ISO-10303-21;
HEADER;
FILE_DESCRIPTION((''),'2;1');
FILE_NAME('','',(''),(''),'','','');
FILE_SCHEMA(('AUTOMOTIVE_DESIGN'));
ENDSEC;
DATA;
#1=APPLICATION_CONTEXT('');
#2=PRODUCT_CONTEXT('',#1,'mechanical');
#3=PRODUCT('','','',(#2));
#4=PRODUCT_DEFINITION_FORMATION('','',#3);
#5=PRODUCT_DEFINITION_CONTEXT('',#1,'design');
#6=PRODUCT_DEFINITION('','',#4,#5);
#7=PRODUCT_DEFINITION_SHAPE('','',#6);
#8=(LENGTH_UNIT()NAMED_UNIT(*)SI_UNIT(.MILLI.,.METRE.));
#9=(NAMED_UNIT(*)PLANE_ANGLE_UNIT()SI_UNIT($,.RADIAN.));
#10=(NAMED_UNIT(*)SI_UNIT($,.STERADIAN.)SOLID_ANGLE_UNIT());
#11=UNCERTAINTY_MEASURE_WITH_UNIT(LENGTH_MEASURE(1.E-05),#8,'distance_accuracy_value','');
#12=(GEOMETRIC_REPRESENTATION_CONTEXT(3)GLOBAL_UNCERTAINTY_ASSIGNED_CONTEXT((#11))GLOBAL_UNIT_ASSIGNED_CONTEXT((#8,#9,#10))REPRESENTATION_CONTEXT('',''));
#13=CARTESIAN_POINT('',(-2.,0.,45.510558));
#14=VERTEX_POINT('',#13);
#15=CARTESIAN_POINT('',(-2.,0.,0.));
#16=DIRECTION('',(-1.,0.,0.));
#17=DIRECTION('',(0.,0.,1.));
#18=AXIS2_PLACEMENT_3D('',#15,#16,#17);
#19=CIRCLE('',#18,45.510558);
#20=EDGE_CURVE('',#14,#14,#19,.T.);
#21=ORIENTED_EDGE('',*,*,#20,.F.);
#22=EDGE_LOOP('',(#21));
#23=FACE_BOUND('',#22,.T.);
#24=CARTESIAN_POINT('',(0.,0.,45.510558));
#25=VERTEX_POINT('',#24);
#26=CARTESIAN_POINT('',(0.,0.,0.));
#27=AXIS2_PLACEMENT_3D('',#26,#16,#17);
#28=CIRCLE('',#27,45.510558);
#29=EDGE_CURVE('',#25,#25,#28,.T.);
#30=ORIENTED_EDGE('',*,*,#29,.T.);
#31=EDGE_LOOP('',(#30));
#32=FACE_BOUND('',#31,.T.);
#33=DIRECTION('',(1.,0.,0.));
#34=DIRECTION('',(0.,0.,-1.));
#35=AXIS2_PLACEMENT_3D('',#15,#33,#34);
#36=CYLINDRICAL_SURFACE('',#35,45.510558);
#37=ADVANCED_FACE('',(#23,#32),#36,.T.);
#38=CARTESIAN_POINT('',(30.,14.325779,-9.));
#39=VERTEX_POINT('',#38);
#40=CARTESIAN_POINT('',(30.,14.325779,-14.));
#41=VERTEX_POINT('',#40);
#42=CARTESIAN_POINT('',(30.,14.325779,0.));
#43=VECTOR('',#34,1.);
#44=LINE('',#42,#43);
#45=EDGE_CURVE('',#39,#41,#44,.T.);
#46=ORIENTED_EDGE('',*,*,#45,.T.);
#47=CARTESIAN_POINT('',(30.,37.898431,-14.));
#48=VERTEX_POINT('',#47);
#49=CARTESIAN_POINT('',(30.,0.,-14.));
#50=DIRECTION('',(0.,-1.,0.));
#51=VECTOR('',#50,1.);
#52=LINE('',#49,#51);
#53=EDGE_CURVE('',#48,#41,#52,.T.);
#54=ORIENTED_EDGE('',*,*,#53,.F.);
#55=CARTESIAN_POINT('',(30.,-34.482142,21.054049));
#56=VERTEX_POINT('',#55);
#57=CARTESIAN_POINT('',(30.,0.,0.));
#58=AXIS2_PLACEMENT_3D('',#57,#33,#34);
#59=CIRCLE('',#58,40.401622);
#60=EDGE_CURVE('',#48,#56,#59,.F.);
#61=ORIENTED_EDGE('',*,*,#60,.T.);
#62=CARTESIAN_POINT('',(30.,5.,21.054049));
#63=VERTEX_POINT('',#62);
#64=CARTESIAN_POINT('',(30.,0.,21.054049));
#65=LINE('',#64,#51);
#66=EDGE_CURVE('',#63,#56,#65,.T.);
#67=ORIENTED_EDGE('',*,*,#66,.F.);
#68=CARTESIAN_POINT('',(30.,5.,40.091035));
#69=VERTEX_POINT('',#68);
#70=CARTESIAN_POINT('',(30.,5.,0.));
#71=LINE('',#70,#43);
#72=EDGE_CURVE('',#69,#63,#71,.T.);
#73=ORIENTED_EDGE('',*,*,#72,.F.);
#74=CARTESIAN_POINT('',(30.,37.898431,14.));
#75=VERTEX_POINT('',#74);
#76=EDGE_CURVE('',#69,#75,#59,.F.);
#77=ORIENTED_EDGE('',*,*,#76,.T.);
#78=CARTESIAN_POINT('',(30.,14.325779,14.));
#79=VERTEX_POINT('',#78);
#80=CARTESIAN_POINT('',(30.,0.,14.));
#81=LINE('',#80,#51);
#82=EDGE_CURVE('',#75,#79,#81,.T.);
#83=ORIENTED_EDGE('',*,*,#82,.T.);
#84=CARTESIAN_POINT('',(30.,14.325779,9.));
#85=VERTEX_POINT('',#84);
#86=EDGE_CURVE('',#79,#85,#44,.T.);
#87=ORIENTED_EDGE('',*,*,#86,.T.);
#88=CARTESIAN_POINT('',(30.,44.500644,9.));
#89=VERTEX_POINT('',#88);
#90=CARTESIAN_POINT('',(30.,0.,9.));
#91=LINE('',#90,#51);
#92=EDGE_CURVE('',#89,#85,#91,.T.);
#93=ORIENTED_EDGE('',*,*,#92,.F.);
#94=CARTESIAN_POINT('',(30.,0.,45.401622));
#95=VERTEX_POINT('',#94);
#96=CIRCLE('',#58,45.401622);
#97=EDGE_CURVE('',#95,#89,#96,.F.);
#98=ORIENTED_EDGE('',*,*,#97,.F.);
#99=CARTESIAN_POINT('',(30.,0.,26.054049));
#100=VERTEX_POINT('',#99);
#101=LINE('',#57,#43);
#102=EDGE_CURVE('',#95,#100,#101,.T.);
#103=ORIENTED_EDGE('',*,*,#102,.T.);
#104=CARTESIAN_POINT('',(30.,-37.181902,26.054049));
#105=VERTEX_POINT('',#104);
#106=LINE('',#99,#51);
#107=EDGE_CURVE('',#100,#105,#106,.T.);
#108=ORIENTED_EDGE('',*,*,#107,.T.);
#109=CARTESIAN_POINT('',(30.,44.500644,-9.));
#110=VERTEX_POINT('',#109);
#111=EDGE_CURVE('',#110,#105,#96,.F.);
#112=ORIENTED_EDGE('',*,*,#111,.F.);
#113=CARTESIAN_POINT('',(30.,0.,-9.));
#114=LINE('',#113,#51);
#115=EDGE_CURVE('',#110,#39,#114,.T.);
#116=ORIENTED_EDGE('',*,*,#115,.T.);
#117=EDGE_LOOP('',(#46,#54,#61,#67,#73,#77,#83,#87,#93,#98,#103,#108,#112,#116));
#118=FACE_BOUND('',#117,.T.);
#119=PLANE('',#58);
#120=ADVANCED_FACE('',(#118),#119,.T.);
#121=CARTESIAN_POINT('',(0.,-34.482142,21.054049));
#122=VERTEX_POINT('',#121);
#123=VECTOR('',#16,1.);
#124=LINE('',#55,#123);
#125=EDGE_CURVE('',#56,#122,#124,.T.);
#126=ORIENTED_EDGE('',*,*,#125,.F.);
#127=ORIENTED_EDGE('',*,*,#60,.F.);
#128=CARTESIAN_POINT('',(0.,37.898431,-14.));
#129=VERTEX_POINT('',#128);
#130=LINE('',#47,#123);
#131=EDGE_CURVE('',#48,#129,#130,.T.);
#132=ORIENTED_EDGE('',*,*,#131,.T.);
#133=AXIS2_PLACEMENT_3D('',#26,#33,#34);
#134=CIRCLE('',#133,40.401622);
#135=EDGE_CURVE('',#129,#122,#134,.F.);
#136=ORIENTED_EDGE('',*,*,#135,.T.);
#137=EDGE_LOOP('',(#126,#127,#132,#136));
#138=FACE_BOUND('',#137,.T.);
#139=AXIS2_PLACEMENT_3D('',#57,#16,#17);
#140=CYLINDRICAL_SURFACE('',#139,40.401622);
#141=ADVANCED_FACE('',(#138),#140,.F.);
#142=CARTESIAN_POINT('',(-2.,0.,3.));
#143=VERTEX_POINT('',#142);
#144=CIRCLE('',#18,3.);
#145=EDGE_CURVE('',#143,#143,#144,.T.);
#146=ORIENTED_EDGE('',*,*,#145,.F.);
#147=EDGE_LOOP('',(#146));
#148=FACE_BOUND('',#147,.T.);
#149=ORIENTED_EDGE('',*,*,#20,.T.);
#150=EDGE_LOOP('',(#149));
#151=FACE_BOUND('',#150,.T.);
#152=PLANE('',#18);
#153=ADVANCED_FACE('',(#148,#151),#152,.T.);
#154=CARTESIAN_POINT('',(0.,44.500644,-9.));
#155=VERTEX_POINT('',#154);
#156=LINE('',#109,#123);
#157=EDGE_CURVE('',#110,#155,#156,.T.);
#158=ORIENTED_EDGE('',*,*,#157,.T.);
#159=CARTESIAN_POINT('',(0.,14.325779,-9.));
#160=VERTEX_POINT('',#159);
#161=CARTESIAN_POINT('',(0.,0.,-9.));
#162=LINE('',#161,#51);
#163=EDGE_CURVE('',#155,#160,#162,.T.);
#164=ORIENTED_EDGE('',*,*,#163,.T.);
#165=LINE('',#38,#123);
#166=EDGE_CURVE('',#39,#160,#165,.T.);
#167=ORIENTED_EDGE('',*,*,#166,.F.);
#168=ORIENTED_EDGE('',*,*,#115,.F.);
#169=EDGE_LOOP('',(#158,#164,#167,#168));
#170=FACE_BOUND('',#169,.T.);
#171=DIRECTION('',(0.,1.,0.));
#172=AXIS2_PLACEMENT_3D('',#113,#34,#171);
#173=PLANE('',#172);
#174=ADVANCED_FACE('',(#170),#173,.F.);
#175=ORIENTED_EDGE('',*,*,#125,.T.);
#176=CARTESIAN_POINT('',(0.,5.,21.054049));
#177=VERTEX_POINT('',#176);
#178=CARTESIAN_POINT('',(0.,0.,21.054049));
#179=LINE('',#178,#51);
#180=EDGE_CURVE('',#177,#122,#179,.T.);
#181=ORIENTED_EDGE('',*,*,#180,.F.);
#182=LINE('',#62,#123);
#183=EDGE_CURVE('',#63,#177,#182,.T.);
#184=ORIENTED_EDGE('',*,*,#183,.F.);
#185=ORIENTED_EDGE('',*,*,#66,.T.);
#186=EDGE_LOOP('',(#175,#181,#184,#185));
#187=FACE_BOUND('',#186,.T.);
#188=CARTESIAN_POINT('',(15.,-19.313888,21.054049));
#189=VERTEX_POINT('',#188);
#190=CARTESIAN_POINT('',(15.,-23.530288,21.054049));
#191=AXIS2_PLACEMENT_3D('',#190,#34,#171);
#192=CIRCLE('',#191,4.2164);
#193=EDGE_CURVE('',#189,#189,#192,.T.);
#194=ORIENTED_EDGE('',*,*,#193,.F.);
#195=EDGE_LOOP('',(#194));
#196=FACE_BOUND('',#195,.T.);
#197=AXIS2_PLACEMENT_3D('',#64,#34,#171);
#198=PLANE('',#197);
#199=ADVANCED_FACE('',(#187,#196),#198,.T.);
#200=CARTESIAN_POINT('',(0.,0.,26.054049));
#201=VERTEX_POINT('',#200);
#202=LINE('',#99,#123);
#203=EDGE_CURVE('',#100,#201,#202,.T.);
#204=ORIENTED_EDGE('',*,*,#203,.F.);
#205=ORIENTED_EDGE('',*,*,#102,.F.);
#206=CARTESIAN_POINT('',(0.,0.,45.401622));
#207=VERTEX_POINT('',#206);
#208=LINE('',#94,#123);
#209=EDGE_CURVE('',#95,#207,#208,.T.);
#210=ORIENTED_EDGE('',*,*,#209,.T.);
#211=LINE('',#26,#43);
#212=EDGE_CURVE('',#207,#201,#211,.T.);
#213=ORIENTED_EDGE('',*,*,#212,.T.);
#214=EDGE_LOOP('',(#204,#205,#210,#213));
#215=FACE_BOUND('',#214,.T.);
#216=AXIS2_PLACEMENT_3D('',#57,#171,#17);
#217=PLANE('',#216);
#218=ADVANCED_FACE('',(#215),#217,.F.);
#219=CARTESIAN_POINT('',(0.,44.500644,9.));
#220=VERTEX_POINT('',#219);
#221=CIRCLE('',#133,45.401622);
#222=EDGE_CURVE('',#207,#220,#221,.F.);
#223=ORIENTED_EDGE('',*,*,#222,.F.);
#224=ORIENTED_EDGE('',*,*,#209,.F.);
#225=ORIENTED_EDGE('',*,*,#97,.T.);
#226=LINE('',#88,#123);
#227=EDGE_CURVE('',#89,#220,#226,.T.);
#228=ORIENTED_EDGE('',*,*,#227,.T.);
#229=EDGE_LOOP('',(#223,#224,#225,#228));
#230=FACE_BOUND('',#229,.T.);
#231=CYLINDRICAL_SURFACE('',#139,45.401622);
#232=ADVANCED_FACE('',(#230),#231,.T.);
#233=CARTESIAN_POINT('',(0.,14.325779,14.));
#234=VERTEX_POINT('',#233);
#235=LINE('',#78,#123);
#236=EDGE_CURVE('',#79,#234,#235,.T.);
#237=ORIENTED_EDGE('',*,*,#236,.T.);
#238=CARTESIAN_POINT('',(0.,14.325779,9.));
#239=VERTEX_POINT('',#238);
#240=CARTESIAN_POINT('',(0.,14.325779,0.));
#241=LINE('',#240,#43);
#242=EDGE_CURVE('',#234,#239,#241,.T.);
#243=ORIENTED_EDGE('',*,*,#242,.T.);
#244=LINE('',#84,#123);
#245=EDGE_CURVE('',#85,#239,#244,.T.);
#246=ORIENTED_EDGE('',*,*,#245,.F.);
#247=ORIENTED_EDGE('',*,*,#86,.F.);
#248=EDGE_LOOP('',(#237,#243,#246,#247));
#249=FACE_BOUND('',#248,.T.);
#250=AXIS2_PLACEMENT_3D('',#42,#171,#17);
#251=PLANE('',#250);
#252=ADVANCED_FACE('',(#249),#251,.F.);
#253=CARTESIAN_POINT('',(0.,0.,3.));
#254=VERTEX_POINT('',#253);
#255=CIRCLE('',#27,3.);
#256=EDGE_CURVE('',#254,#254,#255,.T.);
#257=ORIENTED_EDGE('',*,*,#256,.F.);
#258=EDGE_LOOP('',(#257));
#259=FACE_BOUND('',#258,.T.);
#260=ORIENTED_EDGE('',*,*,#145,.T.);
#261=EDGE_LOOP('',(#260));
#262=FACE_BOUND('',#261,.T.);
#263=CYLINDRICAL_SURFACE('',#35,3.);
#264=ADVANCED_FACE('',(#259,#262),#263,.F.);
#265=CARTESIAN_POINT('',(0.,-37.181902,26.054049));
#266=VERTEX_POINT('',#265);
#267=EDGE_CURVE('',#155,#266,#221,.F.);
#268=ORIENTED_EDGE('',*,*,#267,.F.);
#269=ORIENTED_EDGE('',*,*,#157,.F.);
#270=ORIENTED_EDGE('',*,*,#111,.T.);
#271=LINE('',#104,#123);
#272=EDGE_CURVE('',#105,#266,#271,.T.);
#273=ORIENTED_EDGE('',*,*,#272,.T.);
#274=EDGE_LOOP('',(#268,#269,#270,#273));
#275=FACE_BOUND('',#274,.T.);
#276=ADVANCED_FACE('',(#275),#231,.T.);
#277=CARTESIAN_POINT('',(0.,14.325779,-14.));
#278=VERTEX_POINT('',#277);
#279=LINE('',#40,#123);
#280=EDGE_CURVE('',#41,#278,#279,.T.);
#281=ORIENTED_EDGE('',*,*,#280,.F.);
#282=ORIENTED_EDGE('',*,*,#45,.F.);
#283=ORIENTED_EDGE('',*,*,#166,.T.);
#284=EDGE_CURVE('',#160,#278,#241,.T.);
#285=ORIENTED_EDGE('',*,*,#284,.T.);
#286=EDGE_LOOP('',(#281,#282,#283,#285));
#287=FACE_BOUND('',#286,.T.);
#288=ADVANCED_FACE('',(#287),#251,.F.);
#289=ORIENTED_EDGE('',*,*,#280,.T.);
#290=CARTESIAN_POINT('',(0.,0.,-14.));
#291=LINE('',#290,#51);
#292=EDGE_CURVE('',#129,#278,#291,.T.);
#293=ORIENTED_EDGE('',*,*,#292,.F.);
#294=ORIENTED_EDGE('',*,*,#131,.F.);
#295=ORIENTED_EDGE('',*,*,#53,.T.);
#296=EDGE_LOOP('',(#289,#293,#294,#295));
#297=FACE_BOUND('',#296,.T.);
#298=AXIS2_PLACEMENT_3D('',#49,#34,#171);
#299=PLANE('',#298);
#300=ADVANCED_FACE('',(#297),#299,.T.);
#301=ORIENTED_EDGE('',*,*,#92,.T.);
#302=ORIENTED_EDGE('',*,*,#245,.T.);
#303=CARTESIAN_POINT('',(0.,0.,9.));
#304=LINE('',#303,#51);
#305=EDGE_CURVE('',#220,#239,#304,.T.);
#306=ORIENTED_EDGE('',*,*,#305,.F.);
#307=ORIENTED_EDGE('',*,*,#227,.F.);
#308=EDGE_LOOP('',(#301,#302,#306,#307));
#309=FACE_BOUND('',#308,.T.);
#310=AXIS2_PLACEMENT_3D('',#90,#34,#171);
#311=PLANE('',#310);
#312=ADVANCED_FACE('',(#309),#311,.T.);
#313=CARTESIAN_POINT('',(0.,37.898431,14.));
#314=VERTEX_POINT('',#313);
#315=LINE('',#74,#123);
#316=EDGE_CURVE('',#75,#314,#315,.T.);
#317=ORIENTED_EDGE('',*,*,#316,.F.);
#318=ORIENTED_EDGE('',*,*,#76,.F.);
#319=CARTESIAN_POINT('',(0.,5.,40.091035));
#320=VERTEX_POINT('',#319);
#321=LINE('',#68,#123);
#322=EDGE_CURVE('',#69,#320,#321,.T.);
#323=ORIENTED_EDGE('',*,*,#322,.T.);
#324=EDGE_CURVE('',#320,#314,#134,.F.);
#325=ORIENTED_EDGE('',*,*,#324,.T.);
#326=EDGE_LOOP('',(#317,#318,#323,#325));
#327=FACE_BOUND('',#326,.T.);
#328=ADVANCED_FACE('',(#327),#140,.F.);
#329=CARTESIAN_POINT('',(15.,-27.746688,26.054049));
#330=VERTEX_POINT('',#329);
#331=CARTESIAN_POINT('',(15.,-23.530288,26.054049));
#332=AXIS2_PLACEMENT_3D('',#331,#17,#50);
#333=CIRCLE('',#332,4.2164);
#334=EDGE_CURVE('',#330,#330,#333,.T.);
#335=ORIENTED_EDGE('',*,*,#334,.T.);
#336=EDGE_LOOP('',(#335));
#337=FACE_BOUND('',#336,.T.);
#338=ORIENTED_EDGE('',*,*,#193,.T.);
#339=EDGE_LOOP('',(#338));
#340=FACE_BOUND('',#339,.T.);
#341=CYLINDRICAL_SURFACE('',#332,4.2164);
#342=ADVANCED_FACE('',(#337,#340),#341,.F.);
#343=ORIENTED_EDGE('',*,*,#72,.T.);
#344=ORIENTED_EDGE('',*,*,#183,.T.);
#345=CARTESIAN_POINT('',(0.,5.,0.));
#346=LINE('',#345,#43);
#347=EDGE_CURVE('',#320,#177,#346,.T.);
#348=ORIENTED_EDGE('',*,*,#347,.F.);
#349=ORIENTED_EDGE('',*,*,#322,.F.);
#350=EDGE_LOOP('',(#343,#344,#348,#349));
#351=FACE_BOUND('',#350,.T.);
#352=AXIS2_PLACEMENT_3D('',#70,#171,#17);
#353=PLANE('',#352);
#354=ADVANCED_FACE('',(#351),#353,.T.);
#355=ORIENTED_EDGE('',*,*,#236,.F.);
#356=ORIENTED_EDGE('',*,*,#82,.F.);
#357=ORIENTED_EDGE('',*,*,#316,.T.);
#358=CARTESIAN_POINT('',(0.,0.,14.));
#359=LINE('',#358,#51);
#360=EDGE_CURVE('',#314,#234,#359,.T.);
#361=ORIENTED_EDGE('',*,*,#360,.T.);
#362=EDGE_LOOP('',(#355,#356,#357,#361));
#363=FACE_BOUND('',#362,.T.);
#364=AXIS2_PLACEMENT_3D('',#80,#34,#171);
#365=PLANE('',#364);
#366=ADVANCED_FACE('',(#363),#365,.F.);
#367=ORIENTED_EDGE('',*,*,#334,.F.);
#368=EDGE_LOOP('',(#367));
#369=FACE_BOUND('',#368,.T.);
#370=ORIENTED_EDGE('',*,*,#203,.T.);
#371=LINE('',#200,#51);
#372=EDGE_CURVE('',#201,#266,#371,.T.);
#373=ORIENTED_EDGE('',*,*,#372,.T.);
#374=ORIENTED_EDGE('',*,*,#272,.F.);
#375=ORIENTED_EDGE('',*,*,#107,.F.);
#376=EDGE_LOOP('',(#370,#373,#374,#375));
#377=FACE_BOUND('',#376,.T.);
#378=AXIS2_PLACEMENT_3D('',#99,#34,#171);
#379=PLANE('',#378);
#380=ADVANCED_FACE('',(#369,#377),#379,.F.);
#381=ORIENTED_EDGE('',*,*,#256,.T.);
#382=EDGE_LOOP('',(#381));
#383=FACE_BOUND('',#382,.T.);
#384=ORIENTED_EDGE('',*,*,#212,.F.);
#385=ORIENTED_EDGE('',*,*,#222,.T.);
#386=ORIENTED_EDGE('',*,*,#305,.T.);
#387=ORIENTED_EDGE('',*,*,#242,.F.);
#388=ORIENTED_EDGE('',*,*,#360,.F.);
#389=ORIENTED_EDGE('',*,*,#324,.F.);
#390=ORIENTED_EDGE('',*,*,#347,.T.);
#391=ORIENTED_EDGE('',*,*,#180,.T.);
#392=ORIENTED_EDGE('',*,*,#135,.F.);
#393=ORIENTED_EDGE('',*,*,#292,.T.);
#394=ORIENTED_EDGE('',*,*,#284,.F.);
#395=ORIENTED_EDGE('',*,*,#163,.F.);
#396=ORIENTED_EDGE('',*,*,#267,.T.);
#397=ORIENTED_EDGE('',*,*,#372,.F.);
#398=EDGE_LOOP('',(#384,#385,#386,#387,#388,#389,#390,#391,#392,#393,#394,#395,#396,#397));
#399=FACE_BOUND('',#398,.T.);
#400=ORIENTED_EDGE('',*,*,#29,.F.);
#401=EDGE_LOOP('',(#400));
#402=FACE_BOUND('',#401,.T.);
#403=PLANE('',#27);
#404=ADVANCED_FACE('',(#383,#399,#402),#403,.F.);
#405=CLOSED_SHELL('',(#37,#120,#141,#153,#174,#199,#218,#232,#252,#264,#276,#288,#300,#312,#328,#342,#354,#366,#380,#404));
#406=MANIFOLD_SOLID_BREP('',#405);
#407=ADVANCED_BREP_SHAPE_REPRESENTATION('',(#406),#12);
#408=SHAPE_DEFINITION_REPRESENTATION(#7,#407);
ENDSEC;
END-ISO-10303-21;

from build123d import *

# Parameters (mm, degrees)
ESTRUSIONE_ESTRUSIONE1_DEPTH = 30
SVUOTA4_DEPTH                = 30
SCHIZZO2_R                   = 45.510557865
SCHIZZO2_R_2                 = 3
ESTRUSIONE_ESTRUSIONE2_DEPTH = 2
FORO_PER_VITE_5_16_1_D       = 8.4328
FORO_PER_VITE_5_16_1_DEPTH   = 5


# Read off the part's stored shape, not the designer's step: Svuota4
with BuildPart() as part:
    # Schizzo1 → Estrusione-Estrusione1 (new body)
    with BuildSketch(Plane(origin=(0, 0, 0), x_dir=(0, 0, -1), z_dir=(1, 0, 0))):
        with BuildLine():
            Line((-45.401622395, 0), (-26.054049287, 0))
            Line((-26.054049287, 0), (-26.054049287, -37.181901939))
            ThreePointArc((-26.054049287, -37.181901939), (41.721933403, -17.904959905), (9, 44.500643996))
            Line((9, 44.500643996), (9, 14.325779192))
            Line((9, 14.325779192), (-9, 14.325779192))
            Line((-9, 14.325779192), (-9, 44.500643996))
            ThreePointArc((-9, 44.500643996), (-35.142011309, 28.74624075), (-45.401622395, 0))
        make_face()
    extrude(amount=ESTRUSIONE_ESTRUSIONE1_DEPTH)

    # Svuota4 outline → Svuota4 (cut)
    with BuildSketch(Plane.YZ):
        with BuildLine():
            Line((14.325779192, -14), (14.325779192, 14))
            Line((14.325779192, 14), (37.898431262, 14))
            ThreePointArc((37.898431262, 14), (25.104867632, 31.654963486), (5, 40.091035059))
            Line((5, 40.091035059), (5, 21.054049287))
            Line((5, 21.054049287), (-34.482141765, 21.054049287))
            ThreePointArc((-34.482141765, 21.054049287), (-17.610063922, -36.361748319), (37.898431262, -14))
            Line((37.898431262, -14), (14.325779192, -14))
        make_face()
    extrude(amount=SVUOTA4_DEPTH, mode=Mode.SUBTRACT)

    # Schizzo2 → Estrusione-Estrusione2 (add)
    with BuildSketch(Plane.ZY):
        Circle(SCHIZZO2_R)
        Circle(SCHIZZO2_R_2, mode=Mode.SUBTRACT)
    extrude(amount=ESTRUSIONE_ESTRUSIONE2_DEPTH)

    # Foro per Vite 5/16-1
    with Locations(Plane(origin=(15, -23.530287744, 26.054049287), x_dir=(0, 1, 0), z_dir=(0, 0, 1))):
        with Locations((0, 0)):
            Hole(FORO_PER_VITE_5_16_1_D / 2, depth=FORO_PER_VITE_5_16_1_DEPTH)


solid = part.part
